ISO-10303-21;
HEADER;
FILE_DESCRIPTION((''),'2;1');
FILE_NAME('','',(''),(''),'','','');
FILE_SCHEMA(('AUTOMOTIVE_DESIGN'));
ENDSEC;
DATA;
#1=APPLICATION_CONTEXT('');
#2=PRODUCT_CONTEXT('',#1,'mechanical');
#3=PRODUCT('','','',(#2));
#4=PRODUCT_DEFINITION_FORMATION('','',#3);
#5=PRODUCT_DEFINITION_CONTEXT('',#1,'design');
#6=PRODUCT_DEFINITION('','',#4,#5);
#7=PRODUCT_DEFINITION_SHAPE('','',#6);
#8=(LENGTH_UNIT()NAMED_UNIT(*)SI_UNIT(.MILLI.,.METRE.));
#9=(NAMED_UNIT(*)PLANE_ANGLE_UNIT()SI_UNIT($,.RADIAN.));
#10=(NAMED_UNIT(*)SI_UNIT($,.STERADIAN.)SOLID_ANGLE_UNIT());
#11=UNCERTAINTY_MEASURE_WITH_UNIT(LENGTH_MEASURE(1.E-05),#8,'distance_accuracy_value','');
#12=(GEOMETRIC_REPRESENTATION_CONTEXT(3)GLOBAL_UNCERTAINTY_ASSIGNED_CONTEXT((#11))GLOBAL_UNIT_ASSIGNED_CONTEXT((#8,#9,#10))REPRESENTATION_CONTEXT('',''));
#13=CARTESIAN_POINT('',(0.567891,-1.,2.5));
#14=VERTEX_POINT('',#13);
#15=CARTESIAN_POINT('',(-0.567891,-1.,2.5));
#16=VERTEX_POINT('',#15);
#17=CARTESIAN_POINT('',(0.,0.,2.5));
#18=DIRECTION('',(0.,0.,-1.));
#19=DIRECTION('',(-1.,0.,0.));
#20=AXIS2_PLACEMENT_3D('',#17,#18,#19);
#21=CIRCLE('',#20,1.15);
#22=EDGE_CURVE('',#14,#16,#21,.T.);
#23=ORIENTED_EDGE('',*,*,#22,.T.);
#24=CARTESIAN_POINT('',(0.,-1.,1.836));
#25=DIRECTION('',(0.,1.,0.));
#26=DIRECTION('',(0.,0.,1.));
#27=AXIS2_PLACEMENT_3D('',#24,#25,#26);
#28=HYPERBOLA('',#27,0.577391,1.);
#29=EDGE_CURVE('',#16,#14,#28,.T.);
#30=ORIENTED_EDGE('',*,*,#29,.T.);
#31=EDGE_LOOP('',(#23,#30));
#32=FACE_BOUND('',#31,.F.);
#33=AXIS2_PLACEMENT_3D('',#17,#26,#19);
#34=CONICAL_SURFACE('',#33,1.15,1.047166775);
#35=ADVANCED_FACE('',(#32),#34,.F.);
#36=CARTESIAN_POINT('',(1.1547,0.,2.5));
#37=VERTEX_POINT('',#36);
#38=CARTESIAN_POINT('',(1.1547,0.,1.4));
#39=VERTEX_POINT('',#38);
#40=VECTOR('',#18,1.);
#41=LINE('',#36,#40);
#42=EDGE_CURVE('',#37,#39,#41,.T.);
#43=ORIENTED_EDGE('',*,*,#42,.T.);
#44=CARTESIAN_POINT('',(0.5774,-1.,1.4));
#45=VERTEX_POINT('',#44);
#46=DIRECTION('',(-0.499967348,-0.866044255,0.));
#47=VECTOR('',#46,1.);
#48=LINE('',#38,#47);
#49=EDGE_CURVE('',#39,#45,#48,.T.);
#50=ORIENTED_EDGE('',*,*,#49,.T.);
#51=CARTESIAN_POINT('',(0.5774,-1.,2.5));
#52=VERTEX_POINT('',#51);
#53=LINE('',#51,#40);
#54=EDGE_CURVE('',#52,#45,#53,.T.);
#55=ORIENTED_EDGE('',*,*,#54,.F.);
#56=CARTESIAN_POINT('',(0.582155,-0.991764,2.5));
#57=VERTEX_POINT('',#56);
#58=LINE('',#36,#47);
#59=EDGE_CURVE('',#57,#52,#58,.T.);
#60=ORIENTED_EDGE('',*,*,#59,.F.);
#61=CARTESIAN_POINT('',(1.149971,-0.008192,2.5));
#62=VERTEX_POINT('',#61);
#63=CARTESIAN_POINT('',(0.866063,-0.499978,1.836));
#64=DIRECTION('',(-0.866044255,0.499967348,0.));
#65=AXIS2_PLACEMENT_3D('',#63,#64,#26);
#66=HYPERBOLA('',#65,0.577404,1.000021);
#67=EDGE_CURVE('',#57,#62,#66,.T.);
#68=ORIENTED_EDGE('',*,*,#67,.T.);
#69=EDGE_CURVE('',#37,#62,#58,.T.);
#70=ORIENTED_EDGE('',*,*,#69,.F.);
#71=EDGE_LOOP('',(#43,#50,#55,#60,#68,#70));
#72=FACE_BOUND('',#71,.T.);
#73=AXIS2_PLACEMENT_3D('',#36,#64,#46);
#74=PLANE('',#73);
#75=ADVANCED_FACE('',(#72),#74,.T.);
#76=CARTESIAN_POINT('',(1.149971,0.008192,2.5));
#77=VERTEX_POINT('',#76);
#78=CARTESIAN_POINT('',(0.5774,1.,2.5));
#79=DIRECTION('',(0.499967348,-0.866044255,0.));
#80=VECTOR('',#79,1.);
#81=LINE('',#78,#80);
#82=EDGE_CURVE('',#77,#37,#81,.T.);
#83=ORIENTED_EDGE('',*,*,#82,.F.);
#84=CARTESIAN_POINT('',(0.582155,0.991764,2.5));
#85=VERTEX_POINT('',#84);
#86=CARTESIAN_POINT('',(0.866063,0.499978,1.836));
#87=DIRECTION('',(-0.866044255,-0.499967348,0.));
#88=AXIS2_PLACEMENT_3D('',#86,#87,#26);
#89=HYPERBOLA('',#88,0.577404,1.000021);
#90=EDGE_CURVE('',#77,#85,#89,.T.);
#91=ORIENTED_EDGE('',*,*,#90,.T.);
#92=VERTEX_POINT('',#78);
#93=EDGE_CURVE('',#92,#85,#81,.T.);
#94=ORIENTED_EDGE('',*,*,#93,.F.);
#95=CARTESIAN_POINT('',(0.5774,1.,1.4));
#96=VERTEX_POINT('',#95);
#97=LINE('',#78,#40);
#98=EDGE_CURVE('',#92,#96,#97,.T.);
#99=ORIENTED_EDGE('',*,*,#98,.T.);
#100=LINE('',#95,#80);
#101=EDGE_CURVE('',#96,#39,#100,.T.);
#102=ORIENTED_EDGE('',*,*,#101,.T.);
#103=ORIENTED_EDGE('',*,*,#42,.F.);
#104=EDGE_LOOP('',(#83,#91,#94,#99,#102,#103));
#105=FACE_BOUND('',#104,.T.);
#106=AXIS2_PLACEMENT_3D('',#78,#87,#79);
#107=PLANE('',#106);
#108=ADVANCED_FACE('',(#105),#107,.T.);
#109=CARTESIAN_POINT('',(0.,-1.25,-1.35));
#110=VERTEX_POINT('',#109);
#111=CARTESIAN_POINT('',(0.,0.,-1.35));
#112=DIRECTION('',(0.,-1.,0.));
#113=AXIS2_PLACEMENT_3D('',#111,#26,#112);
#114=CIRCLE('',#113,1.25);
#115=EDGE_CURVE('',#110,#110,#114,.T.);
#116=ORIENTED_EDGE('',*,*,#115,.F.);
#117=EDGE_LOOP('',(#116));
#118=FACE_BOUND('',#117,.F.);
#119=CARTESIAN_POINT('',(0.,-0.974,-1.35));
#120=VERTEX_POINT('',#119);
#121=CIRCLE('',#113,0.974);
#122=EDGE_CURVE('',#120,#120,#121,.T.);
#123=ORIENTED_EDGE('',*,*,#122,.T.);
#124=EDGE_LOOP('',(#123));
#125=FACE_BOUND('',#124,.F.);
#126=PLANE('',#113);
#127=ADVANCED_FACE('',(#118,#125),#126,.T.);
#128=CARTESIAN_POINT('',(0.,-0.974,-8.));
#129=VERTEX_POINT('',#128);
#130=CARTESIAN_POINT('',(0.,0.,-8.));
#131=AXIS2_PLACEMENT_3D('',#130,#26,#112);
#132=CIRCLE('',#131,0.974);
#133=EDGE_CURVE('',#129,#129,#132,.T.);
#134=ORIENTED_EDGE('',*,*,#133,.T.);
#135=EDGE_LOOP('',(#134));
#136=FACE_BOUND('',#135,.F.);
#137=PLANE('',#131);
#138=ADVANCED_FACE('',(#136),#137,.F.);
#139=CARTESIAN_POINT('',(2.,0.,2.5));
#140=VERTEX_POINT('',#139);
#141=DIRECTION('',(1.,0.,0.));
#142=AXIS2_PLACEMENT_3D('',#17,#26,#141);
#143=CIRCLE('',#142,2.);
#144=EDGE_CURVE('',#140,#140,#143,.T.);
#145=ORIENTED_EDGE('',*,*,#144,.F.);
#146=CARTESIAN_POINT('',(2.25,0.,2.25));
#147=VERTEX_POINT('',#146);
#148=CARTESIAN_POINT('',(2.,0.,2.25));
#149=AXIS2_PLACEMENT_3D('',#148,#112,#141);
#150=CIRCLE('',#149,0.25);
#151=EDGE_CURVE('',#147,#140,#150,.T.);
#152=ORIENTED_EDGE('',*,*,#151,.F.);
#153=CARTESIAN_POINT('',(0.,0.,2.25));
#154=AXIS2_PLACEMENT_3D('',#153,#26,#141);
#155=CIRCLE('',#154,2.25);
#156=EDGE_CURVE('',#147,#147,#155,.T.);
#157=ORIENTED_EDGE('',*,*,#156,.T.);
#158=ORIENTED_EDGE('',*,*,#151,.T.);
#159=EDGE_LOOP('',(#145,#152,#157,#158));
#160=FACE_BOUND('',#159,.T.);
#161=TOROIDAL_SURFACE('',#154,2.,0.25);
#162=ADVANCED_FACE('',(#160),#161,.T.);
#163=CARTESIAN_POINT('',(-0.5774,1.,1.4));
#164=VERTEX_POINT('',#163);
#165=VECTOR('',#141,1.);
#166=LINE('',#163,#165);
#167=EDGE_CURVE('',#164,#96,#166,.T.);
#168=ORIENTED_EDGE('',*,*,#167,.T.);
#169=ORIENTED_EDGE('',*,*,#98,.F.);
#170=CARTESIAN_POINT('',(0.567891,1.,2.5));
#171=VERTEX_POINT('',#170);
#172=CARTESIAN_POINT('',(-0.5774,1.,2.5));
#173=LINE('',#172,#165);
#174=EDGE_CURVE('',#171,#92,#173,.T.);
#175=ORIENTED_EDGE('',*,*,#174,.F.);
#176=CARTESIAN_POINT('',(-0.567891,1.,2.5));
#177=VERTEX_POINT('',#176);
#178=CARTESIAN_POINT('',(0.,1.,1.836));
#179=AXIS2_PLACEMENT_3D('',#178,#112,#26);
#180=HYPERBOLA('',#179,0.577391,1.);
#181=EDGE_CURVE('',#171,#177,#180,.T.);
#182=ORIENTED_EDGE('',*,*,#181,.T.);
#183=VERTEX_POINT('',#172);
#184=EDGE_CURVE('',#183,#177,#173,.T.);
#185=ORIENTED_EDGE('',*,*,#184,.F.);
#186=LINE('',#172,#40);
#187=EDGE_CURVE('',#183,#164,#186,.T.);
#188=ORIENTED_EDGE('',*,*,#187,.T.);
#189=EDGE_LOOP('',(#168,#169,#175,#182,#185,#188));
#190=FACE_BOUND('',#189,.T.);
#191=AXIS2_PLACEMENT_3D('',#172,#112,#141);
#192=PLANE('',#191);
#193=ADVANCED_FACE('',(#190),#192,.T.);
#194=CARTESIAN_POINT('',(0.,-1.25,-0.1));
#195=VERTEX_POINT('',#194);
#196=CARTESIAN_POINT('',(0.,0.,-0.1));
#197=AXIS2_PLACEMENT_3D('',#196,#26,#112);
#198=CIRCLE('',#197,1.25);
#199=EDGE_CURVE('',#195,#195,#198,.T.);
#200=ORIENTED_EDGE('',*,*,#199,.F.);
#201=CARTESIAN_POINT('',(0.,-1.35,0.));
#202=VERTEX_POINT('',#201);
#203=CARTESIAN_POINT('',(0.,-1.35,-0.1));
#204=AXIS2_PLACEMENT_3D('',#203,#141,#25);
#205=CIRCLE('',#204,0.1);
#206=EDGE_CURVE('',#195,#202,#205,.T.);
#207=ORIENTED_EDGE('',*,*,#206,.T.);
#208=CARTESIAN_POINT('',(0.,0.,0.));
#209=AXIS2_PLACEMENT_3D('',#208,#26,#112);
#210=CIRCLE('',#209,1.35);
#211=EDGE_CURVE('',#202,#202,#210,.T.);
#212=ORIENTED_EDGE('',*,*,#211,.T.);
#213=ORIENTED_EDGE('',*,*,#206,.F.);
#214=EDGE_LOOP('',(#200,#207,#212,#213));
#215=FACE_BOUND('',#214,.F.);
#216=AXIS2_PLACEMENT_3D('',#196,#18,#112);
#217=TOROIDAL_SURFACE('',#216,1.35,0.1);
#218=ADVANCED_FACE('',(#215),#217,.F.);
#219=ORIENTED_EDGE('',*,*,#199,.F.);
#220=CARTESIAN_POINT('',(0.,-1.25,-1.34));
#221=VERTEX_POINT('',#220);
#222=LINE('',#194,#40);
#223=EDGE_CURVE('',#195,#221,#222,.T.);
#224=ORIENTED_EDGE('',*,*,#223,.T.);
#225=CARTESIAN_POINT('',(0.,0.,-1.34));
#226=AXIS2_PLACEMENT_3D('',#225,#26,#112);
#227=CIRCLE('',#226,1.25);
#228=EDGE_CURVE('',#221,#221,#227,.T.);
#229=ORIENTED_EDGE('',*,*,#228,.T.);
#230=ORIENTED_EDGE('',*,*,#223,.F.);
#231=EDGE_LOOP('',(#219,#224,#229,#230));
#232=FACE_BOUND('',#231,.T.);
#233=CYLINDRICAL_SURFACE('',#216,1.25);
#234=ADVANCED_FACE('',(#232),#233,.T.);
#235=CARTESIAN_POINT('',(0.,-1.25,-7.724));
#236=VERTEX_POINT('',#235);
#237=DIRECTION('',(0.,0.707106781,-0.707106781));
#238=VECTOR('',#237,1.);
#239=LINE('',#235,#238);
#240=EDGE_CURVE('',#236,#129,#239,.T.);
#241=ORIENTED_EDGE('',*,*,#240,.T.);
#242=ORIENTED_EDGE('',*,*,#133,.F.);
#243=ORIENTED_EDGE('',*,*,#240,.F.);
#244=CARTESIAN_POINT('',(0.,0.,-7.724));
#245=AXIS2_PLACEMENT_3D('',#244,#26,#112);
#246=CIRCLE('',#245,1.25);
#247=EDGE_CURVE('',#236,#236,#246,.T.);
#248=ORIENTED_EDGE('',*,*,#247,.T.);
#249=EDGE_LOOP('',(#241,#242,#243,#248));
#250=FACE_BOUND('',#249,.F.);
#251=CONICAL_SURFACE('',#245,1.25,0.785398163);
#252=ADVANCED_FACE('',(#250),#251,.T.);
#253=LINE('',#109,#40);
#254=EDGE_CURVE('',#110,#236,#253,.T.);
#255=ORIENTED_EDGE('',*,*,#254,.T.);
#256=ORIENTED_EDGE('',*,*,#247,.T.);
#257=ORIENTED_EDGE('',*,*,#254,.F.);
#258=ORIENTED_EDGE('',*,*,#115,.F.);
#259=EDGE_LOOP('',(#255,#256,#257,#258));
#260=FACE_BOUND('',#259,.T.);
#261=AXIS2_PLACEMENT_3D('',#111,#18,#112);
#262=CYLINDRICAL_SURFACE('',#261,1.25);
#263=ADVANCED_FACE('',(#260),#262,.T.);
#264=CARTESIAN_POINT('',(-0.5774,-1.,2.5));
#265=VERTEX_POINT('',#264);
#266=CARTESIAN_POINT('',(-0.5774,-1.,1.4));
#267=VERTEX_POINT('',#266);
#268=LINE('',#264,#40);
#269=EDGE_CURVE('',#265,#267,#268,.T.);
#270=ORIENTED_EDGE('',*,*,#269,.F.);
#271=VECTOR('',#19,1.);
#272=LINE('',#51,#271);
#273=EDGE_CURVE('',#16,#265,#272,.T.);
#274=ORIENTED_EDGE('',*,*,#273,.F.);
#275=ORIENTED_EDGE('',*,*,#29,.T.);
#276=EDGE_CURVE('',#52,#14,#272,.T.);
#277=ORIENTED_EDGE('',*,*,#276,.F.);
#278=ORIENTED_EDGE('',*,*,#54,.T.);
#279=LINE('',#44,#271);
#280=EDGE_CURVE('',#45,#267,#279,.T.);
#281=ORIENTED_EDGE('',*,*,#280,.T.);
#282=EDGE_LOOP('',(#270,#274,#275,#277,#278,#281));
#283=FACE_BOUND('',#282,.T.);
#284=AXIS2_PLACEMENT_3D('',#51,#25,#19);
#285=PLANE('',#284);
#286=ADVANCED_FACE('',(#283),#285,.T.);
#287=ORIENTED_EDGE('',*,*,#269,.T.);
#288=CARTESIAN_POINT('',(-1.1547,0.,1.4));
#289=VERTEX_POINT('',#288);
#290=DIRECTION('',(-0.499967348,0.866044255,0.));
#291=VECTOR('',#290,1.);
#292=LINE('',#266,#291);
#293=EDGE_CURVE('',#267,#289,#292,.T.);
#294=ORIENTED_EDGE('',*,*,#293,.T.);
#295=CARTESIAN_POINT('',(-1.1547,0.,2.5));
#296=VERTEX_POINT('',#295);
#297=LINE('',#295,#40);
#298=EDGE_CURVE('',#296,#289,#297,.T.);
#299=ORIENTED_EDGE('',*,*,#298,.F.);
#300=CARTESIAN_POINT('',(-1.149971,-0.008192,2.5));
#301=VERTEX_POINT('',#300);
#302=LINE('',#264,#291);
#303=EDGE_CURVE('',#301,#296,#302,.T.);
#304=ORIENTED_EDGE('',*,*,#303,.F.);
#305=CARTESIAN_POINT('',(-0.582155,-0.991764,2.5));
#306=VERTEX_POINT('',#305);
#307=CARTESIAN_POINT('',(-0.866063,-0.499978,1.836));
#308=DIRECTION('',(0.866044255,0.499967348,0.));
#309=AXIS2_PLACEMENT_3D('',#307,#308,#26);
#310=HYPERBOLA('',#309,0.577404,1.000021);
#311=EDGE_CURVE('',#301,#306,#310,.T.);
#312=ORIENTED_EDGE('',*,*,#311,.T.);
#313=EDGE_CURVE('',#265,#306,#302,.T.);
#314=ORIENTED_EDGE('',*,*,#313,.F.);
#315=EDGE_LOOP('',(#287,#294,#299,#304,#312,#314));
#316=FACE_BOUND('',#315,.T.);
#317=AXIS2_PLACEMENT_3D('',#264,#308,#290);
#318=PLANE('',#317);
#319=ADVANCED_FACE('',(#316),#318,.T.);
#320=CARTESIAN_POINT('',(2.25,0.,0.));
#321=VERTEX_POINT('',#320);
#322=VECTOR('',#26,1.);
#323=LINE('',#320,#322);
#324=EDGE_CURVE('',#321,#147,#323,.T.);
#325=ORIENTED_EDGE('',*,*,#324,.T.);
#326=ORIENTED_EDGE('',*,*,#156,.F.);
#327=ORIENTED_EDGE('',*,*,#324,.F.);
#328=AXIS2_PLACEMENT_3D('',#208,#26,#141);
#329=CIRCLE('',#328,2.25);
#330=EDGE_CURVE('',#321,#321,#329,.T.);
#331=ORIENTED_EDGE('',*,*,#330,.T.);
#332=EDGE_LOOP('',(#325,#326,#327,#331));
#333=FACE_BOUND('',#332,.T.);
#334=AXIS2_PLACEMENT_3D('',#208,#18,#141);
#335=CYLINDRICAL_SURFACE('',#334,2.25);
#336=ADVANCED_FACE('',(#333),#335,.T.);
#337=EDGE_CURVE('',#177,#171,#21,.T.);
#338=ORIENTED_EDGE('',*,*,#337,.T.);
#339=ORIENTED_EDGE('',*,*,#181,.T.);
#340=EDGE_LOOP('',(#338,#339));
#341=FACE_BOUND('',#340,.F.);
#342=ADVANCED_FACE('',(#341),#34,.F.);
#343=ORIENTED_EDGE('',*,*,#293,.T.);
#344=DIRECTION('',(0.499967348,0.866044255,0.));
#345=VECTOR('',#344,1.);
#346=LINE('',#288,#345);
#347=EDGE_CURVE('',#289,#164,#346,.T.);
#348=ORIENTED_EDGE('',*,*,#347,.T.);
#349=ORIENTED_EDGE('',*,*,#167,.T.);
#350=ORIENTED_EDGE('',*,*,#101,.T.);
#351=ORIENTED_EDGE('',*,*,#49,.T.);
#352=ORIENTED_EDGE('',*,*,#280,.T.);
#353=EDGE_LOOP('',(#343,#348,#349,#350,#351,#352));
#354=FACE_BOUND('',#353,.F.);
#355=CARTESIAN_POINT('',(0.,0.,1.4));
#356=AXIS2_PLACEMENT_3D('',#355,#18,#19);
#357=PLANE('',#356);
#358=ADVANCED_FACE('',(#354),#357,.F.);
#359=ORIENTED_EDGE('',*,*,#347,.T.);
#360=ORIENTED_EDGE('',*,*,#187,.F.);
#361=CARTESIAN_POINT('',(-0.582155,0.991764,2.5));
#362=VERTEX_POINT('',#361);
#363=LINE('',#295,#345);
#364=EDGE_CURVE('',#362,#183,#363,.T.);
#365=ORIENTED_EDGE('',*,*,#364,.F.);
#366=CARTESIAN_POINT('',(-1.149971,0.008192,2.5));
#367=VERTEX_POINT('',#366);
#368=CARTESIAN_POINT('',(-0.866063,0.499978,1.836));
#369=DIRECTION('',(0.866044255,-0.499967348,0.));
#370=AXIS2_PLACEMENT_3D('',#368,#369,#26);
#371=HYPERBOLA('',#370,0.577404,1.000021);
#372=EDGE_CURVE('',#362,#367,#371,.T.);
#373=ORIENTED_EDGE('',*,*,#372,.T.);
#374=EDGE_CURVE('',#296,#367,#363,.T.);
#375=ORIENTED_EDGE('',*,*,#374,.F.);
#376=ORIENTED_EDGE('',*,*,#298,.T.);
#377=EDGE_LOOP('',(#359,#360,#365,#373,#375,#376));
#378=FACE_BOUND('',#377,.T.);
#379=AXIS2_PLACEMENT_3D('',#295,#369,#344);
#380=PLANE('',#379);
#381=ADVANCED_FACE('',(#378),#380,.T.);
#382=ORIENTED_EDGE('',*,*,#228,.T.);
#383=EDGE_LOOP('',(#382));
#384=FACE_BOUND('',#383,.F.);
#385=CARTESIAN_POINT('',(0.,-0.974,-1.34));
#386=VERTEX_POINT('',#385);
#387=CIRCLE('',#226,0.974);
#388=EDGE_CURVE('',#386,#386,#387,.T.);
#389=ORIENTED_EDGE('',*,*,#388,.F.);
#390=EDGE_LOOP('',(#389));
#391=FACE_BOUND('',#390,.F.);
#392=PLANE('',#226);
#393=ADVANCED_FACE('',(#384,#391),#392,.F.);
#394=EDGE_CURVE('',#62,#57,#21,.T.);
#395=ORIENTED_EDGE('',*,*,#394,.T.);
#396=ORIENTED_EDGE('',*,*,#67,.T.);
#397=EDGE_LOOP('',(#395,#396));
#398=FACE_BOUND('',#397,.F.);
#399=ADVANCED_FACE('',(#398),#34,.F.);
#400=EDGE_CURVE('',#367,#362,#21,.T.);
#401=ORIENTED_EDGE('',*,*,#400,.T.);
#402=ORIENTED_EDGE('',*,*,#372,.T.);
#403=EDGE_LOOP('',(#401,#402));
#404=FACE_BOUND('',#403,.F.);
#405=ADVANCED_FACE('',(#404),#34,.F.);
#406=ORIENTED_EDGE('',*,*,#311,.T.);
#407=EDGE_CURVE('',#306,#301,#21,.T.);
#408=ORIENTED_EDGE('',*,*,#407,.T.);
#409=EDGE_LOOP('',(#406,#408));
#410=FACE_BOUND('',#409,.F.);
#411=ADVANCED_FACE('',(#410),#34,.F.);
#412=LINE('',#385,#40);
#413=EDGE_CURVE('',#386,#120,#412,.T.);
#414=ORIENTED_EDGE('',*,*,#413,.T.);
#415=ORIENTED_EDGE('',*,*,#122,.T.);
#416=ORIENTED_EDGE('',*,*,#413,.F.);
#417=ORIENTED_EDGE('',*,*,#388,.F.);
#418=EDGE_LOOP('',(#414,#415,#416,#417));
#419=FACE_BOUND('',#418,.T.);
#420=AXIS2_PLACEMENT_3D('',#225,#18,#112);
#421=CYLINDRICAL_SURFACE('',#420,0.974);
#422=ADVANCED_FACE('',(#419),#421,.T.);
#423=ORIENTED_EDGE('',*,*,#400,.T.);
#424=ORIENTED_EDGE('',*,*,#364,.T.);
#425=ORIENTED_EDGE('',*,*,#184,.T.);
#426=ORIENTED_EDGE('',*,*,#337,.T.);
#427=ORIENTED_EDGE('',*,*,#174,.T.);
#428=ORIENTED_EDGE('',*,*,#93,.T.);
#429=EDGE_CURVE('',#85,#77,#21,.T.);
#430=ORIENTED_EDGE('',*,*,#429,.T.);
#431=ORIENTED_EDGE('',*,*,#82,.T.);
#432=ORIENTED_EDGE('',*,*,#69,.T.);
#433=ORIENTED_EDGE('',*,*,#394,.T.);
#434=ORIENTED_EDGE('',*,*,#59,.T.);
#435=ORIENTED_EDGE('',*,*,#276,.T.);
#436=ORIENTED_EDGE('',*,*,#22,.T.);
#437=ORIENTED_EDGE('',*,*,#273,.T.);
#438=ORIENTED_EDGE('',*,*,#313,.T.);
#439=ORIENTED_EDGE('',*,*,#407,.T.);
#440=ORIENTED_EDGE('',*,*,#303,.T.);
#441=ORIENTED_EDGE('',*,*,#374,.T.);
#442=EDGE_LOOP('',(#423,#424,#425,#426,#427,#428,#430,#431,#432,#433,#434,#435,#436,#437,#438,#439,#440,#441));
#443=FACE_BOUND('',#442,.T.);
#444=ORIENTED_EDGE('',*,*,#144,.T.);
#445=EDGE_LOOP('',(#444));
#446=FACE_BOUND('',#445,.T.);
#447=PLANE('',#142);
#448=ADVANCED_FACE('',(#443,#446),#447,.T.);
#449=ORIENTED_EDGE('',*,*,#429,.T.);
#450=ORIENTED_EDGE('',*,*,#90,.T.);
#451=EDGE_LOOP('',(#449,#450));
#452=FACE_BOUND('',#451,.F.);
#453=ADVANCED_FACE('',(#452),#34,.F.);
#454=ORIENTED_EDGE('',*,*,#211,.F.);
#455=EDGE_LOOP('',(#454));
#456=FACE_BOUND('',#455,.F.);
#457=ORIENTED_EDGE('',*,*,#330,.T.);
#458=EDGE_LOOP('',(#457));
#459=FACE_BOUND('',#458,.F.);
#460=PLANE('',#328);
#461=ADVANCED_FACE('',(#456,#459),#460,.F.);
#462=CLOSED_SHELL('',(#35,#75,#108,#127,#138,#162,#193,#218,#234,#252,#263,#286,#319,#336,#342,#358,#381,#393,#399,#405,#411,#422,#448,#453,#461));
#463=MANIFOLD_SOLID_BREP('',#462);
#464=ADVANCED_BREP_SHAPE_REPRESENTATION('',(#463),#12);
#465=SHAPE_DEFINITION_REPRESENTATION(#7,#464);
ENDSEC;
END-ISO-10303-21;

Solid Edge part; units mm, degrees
sketch "Sketch1" plane through (0, 0, 0) normal (0, 0, 1) x (1, 0, 0)
  circle A0 centre (0, 0) radius 2.25
extrude "Protrusion1" add sketch "Sketch1" along normal blind 2.5
sketch "Sketch2" plane through (0, 0, 2.5) normal (0, 0, 1) x (0, 1, 0)
  line L0 (0, 1.1547) -> (1, 0.5774)
  line L1 (1, 0.5774) -> (1, -0.5774)
  line L2 (1, -0.5774) -> (0, -1.1547)
  line L3 (0, -1.1547) -> (-1, -0.5774)
  line L4 (-1, -0.5774) -> (-1, 0.5774)
  line L5 (-1, 0.5774) -> (0, 1.1547)
extrude "Cutout1" cut sketch "Sketch2" against normal blind 1.1
fillet "Round1" radius 0.25 1 edges at (-2.25, 0, 2.5)
sketch "Sketch3" plane through (0, 0, 0) normal (1, 0, 0) x (0, 1, 0)
  line L0 (-0.974, -8) -> (0, -8)
  line L1 (-1.25, -7.724) -> (-0.974, -8)
  line L2 (-1.25, -1.35) -> (-1.25, -7.724)
  line L3 (-0.974, -1.35) -> (-1.25, -1.35)
  line L4 (-0.974, -1.34) -> (-0.974, -1.35)
  line L5 (-1.25, -1.34) -> (-0.974, -1.34)
  line L6 (-1.25, -0.1) -> (-1.25, -1.34)
  arc A0 (-1.25, -0.1) -> (-1.35, 0) centre (-1.35, -0.1) ccw
  dimension "D1" = 1.35
  dimension "D2" = 0.01
  dimension "D3" = 0.1
  dimension "D4" = 8
revolve "RevolvedProtrusion1" add sketch "Sketch3" angle 360 about axis through (0, 0, -60.325) along (0, 0, 1) material side at (0, -0.487, -7.95)
cosmetic_thread "Thread1" size "M2.5"
sketch "Sketch4" plane through (0, 0, 0) normal (0, -1, 0) x (1, 0, 0)
  line L0 (-1.15, 2.5) -> (0, 1.836)
revolve "RevolvedCutout1" cut sketch "Sketch4" angle 360 about axis through (0, 0, 57.15) along (0, 0, -1) material side at (-0.55, 0, 2.2113)
properties material "Stahl"
